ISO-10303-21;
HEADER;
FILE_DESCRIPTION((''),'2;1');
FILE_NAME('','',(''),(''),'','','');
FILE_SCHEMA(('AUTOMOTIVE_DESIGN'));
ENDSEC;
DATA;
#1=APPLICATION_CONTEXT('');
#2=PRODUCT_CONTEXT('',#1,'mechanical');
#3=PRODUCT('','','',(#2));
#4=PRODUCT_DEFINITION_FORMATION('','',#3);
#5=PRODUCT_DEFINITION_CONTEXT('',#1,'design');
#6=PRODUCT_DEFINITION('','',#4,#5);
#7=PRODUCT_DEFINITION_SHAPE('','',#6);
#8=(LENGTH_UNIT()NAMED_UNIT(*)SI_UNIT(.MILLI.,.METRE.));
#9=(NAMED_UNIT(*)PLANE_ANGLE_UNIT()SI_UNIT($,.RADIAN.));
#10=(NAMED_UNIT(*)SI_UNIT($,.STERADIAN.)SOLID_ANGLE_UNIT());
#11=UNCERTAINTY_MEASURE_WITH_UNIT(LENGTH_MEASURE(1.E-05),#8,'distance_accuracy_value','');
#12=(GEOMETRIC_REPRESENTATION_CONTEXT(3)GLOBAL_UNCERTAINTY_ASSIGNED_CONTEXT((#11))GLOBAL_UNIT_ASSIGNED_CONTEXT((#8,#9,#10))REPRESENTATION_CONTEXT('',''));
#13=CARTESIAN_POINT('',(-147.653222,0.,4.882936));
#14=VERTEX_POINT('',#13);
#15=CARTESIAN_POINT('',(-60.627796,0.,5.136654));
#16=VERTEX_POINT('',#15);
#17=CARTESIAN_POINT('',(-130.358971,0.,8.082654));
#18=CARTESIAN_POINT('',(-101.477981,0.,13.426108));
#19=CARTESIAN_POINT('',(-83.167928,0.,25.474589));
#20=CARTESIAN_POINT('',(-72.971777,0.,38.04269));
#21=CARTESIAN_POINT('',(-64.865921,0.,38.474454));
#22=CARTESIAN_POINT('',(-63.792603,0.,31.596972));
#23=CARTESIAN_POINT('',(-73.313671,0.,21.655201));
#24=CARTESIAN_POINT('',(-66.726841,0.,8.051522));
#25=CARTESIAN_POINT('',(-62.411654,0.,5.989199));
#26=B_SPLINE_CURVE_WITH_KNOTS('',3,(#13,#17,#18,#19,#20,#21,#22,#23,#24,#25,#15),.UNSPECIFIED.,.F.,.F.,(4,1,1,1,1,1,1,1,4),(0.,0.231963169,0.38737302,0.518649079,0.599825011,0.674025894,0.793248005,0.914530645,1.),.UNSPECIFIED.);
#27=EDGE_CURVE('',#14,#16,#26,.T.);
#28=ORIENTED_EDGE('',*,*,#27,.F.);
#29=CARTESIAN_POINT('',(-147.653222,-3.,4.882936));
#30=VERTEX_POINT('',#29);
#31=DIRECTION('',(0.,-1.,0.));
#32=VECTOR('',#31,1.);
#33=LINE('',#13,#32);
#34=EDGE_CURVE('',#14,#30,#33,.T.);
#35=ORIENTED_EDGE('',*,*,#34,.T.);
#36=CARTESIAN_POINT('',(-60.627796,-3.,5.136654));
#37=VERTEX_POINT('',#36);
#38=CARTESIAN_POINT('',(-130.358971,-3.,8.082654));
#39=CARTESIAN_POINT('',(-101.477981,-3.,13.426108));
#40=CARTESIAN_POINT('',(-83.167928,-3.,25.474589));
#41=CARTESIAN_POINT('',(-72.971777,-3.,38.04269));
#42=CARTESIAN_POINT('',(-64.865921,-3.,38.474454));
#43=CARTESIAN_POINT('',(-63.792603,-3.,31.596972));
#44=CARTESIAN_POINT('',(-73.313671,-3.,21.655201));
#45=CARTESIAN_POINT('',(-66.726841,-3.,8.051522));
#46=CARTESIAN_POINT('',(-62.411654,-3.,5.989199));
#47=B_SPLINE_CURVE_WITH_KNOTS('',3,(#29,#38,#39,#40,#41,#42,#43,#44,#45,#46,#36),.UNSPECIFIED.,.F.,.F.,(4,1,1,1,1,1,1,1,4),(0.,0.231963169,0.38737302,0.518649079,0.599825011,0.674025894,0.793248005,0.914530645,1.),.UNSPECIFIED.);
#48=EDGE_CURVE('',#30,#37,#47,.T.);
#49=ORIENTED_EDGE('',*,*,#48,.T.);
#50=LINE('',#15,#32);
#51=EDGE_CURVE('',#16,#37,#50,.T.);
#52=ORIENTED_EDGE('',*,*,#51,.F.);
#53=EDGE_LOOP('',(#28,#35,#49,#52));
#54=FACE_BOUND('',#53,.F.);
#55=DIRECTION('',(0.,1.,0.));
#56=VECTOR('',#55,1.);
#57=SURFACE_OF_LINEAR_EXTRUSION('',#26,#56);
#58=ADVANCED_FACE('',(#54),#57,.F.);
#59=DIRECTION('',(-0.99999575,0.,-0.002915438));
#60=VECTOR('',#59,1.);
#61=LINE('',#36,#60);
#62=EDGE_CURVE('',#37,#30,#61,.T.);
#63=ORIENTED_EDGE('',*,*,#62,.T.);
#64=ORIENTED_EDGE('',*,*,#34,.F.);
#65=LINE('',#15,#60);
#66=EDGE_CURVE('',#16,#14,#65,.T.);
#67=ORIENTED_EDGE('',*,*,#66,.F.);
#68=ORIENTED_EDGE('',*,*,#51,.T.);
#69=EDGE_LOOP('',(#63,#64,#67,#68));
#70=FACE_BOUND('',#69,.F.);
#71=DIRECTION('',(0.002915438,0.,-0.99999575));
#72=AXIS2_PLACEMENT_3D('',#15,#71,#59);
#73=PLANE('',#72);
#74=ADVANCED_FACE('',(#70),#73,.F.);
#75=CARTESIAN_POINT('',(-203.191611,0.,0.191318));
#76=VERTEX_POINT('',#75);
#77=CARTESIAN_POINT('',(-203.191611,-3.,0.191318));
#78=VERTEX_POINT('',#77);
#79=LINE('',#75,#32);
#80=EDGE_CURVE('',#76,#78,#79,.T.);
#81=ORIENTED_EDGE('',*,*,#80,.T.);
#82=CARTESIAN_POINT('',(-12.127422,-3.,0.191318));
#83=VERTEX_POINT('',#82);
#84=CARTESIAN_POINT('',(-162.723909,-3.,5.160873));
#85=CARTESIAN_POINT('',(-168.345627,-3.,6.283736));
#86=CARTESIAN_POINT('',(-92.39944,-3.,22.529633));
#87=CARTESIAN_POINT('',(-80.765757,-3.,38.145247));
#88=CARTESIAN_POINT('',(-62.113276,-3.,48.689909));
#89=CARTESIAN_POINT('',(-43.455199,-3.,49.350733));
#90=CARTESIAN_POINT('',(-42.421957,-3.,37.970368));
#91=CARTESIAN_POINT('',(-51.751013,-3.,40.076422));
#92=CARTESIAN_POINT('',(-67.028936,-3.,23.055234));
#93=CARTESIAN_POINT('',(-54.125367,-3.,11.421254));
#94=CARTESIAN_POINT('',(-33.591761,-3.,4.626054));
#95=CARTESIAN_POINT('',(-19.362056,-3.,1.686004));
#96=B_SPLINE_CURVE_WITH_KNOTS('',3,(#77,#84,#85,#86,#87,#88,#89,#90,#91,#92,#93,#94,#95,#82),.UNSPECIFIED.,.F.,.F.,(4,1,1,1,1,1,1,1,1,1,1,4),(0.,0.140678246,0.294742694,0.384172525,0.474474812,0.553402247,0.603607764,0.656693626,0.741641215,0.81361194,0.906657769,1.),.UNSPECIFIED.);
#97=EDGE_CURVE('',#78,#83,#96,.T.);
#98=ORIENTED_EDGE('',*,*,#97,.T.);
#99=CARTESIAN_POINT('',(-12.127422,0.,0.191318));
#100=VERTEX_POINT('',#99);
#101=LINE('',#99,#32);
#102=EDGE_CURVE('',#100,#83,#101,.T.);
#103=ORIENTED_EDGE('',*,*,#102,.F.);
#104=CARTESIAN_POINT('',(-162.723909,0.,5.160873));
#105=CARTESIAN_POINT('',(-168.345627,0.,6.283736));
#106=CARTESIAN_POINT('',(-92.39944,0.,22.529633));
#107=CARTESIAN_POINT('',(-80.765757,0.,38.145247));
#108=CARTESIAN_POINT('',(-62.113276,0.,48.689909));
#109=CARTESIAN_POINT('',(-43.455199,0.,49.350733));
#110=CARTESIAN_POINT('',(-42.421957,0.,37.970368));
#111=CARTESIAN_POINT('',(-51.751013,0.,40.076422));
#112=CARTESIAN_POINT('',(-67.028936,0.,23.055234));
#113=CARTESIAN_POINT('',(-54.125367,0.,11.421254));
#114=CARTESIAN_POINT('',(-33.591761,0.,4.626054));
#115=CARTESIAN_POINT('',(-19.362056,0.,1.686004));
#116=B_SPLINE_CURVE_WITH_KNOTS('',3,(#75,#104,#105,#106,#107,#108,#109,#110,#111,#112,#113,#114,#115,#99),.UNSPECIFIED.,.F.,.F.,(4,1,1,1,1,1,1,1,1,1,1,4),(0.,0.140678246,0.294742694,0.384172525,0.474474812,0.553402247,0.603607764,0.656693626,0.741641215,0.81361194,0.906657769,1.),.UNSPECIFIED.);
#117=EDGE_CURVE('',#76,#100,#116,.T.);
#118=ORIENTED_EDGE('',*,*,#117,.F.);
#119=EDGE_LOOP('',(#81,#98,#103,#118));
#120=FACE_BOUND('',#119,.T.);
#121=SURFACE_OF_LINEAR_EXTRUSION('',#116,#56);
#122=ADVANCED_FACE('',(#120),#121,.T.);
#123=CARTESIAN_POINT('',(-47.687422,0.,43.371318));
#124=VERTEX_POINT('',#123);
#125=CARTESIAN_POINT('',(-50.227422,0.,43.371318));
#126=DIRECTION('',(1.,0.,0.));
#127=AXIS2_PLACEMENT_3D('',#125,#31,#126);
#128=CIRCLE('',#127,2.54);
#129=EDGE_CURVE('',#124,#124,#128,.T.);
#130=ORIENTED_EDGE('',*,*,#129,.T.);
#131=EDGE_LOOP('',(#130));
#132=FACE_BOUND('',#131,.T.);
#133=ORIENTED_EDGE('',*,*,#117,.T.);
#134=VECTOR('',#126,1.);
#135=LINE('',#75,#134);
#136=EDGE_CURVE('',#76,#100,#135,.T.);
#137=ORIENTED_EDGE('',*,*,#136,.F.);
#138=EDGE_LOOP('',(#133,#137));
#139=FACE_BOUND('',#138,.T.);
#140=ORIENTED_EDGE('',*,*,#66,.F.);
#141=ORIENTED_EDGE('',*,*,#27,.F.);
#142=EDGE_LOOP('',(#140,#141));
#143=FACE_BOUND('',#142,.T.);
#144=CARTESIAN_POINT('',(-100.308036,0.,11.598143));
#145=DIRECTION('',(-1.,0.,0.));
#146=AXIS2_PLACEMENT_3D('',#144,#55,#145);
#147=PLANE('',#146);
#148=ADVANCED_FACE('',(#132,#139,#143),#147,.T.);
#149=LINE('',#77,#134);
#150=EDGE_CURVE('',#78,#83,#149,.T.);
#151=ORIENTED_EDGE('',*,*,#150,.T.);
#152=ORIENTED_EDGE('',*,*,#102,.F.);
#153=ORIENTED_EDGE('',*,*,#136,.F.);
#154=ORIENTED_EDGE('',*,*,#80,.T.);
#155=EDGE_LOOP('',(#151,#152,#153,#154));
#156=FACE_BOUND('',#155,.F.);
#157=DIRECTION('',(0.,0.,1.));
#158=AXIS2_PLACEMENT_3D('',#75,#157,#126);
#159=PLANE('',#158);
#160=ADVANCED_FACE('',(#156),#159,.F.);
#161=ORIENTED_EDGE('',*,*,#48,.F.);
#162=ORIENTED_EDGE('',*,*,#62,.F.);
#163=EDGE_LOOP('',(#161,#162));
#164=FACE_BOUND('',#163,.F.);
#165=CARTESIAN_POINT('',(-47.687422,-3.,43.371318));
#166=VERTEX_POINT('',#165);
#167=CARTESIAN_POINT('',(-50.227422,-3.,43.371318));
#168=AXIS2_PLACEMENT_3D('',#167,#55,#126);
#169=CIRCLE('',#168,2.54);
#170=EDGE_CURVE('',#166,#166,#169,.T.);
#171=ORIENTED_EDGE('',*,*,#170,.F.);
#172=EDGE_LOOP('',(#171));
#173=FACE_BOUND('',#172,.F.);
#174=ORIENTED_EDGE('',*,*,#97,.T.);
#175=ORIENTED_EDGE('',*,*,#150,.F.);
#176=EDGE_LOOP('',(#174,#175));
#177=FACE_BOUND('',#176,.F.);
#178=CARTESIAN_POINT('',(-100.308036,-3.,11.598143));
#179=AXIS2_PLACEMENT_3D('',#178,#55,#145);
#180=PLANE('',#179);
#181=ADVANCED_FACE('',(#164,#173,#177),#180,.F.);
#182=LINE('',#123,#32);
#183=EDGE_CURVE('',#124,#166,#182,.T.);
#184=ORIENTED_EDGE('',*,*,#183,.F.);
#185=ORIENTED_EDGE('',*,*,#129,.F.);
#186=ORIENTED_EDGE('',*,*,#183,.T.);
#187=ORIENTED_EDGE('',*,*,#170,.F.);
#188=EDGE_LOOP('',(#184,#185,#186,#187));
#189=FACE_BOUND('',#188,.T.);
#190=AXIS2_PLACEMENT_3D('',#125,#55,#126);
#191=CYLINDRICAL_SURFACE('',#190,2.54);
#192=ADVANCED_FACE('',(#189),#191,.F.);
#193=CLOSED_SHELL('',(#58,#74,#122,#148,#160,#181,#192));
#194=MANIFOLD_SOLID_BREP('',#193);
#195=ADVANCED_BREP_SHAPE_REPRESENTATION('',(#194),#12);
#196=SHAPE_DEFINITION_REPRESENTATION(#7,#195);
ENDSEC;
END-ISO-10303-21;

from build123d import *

# Parameters (mm, degrees)
F1_DEPTH = 3
F2_R     = 2.54
F3_DEPTH = 25.4


# Not quite as in the source:
# - a feature names something its author has since deleted; it is built from what else it names


with BuildPart() as f1:
    # F0 (on Front) → F1 (new body)
    with BuildSketch(Plane.XZ):
        with BuildLine():
            add(Edge.make_bspline(
                [(-203.1916106619, 0.1913178712), (-162.7239087005, 5.1608725361), (-168.3456273381, 6.283736461), (-92.3994399685, 22.5296334539), (-80.7657565229, 38.1452471787), (-62.1132756355, 48.6899093444), (-43.455198512, 49.3507332073), (-42.4219565639, 37.9703684819), (-51.7510128272, 40.0764215485), (-67.0289361999, 23.0552343494), (-54.1253670283, 11.4212539718), (-33.5917608798, 4.6260542829), (-19.3620556884, 1.6860036467), (-12.1274217963, 0.1913178712)],
                knots=[0, 0, 0, 0, 0.140678246, 0.2947426936, 0.384172525, 0.4744748119, 0.5534022467, 0.6036077636, 0.6566936259, 0.7416412148, 0.8136119401, 0.9066577692, 1, 1, 1, 1], degree=3))
            Line((-203.1916106619, 0.1913178712), (-12.1274217963, 0.1913178712))
        make_face()
        with BuildLine():
            Line((-60.6277957559, 5.1366542466), (-147.653222084, 4.8829359002))
            add(Edge.make_bspline(
                [(-147.653222084, 4.8829359002), (-130.3589714209, 8.0826541566), (-101.4779807426, 13.426108171), (-83.1679275212, 25.4745889426), (-72.9717774064, 38.0426898937), (-64.86592143, 38.4744537878), (-63.7926032387, 31.5969719498), (-73.3136713805, 21.6552008441), (-66.7268411849, 8.0515220574), (-62.4116540428, 5.9891993145), (-60.6277957559, 5.1366542466)],
                knots=[0, 0, 0, 0, 0.2319631686, 0.3873730202, 0.5186490792, 0.599825011, 0.674025894, 0.7932480048, 0.9145306454, 1, 1, 1, 1], degree=3))
        make_face(mode=Mode.SUBTRACT)
    extrude(amount=F1_DEPTH)

    # F2 (on Front) → F3 (cut)
    with BuildSketch(Plane.XZ):
        with Locations((-50.2274217963, 43.3713178712)):
            Circle(F2_R)
    extrude(amount=F3_DEPTH, mode=Mode.SUBTRACT)


solid = f1.part
